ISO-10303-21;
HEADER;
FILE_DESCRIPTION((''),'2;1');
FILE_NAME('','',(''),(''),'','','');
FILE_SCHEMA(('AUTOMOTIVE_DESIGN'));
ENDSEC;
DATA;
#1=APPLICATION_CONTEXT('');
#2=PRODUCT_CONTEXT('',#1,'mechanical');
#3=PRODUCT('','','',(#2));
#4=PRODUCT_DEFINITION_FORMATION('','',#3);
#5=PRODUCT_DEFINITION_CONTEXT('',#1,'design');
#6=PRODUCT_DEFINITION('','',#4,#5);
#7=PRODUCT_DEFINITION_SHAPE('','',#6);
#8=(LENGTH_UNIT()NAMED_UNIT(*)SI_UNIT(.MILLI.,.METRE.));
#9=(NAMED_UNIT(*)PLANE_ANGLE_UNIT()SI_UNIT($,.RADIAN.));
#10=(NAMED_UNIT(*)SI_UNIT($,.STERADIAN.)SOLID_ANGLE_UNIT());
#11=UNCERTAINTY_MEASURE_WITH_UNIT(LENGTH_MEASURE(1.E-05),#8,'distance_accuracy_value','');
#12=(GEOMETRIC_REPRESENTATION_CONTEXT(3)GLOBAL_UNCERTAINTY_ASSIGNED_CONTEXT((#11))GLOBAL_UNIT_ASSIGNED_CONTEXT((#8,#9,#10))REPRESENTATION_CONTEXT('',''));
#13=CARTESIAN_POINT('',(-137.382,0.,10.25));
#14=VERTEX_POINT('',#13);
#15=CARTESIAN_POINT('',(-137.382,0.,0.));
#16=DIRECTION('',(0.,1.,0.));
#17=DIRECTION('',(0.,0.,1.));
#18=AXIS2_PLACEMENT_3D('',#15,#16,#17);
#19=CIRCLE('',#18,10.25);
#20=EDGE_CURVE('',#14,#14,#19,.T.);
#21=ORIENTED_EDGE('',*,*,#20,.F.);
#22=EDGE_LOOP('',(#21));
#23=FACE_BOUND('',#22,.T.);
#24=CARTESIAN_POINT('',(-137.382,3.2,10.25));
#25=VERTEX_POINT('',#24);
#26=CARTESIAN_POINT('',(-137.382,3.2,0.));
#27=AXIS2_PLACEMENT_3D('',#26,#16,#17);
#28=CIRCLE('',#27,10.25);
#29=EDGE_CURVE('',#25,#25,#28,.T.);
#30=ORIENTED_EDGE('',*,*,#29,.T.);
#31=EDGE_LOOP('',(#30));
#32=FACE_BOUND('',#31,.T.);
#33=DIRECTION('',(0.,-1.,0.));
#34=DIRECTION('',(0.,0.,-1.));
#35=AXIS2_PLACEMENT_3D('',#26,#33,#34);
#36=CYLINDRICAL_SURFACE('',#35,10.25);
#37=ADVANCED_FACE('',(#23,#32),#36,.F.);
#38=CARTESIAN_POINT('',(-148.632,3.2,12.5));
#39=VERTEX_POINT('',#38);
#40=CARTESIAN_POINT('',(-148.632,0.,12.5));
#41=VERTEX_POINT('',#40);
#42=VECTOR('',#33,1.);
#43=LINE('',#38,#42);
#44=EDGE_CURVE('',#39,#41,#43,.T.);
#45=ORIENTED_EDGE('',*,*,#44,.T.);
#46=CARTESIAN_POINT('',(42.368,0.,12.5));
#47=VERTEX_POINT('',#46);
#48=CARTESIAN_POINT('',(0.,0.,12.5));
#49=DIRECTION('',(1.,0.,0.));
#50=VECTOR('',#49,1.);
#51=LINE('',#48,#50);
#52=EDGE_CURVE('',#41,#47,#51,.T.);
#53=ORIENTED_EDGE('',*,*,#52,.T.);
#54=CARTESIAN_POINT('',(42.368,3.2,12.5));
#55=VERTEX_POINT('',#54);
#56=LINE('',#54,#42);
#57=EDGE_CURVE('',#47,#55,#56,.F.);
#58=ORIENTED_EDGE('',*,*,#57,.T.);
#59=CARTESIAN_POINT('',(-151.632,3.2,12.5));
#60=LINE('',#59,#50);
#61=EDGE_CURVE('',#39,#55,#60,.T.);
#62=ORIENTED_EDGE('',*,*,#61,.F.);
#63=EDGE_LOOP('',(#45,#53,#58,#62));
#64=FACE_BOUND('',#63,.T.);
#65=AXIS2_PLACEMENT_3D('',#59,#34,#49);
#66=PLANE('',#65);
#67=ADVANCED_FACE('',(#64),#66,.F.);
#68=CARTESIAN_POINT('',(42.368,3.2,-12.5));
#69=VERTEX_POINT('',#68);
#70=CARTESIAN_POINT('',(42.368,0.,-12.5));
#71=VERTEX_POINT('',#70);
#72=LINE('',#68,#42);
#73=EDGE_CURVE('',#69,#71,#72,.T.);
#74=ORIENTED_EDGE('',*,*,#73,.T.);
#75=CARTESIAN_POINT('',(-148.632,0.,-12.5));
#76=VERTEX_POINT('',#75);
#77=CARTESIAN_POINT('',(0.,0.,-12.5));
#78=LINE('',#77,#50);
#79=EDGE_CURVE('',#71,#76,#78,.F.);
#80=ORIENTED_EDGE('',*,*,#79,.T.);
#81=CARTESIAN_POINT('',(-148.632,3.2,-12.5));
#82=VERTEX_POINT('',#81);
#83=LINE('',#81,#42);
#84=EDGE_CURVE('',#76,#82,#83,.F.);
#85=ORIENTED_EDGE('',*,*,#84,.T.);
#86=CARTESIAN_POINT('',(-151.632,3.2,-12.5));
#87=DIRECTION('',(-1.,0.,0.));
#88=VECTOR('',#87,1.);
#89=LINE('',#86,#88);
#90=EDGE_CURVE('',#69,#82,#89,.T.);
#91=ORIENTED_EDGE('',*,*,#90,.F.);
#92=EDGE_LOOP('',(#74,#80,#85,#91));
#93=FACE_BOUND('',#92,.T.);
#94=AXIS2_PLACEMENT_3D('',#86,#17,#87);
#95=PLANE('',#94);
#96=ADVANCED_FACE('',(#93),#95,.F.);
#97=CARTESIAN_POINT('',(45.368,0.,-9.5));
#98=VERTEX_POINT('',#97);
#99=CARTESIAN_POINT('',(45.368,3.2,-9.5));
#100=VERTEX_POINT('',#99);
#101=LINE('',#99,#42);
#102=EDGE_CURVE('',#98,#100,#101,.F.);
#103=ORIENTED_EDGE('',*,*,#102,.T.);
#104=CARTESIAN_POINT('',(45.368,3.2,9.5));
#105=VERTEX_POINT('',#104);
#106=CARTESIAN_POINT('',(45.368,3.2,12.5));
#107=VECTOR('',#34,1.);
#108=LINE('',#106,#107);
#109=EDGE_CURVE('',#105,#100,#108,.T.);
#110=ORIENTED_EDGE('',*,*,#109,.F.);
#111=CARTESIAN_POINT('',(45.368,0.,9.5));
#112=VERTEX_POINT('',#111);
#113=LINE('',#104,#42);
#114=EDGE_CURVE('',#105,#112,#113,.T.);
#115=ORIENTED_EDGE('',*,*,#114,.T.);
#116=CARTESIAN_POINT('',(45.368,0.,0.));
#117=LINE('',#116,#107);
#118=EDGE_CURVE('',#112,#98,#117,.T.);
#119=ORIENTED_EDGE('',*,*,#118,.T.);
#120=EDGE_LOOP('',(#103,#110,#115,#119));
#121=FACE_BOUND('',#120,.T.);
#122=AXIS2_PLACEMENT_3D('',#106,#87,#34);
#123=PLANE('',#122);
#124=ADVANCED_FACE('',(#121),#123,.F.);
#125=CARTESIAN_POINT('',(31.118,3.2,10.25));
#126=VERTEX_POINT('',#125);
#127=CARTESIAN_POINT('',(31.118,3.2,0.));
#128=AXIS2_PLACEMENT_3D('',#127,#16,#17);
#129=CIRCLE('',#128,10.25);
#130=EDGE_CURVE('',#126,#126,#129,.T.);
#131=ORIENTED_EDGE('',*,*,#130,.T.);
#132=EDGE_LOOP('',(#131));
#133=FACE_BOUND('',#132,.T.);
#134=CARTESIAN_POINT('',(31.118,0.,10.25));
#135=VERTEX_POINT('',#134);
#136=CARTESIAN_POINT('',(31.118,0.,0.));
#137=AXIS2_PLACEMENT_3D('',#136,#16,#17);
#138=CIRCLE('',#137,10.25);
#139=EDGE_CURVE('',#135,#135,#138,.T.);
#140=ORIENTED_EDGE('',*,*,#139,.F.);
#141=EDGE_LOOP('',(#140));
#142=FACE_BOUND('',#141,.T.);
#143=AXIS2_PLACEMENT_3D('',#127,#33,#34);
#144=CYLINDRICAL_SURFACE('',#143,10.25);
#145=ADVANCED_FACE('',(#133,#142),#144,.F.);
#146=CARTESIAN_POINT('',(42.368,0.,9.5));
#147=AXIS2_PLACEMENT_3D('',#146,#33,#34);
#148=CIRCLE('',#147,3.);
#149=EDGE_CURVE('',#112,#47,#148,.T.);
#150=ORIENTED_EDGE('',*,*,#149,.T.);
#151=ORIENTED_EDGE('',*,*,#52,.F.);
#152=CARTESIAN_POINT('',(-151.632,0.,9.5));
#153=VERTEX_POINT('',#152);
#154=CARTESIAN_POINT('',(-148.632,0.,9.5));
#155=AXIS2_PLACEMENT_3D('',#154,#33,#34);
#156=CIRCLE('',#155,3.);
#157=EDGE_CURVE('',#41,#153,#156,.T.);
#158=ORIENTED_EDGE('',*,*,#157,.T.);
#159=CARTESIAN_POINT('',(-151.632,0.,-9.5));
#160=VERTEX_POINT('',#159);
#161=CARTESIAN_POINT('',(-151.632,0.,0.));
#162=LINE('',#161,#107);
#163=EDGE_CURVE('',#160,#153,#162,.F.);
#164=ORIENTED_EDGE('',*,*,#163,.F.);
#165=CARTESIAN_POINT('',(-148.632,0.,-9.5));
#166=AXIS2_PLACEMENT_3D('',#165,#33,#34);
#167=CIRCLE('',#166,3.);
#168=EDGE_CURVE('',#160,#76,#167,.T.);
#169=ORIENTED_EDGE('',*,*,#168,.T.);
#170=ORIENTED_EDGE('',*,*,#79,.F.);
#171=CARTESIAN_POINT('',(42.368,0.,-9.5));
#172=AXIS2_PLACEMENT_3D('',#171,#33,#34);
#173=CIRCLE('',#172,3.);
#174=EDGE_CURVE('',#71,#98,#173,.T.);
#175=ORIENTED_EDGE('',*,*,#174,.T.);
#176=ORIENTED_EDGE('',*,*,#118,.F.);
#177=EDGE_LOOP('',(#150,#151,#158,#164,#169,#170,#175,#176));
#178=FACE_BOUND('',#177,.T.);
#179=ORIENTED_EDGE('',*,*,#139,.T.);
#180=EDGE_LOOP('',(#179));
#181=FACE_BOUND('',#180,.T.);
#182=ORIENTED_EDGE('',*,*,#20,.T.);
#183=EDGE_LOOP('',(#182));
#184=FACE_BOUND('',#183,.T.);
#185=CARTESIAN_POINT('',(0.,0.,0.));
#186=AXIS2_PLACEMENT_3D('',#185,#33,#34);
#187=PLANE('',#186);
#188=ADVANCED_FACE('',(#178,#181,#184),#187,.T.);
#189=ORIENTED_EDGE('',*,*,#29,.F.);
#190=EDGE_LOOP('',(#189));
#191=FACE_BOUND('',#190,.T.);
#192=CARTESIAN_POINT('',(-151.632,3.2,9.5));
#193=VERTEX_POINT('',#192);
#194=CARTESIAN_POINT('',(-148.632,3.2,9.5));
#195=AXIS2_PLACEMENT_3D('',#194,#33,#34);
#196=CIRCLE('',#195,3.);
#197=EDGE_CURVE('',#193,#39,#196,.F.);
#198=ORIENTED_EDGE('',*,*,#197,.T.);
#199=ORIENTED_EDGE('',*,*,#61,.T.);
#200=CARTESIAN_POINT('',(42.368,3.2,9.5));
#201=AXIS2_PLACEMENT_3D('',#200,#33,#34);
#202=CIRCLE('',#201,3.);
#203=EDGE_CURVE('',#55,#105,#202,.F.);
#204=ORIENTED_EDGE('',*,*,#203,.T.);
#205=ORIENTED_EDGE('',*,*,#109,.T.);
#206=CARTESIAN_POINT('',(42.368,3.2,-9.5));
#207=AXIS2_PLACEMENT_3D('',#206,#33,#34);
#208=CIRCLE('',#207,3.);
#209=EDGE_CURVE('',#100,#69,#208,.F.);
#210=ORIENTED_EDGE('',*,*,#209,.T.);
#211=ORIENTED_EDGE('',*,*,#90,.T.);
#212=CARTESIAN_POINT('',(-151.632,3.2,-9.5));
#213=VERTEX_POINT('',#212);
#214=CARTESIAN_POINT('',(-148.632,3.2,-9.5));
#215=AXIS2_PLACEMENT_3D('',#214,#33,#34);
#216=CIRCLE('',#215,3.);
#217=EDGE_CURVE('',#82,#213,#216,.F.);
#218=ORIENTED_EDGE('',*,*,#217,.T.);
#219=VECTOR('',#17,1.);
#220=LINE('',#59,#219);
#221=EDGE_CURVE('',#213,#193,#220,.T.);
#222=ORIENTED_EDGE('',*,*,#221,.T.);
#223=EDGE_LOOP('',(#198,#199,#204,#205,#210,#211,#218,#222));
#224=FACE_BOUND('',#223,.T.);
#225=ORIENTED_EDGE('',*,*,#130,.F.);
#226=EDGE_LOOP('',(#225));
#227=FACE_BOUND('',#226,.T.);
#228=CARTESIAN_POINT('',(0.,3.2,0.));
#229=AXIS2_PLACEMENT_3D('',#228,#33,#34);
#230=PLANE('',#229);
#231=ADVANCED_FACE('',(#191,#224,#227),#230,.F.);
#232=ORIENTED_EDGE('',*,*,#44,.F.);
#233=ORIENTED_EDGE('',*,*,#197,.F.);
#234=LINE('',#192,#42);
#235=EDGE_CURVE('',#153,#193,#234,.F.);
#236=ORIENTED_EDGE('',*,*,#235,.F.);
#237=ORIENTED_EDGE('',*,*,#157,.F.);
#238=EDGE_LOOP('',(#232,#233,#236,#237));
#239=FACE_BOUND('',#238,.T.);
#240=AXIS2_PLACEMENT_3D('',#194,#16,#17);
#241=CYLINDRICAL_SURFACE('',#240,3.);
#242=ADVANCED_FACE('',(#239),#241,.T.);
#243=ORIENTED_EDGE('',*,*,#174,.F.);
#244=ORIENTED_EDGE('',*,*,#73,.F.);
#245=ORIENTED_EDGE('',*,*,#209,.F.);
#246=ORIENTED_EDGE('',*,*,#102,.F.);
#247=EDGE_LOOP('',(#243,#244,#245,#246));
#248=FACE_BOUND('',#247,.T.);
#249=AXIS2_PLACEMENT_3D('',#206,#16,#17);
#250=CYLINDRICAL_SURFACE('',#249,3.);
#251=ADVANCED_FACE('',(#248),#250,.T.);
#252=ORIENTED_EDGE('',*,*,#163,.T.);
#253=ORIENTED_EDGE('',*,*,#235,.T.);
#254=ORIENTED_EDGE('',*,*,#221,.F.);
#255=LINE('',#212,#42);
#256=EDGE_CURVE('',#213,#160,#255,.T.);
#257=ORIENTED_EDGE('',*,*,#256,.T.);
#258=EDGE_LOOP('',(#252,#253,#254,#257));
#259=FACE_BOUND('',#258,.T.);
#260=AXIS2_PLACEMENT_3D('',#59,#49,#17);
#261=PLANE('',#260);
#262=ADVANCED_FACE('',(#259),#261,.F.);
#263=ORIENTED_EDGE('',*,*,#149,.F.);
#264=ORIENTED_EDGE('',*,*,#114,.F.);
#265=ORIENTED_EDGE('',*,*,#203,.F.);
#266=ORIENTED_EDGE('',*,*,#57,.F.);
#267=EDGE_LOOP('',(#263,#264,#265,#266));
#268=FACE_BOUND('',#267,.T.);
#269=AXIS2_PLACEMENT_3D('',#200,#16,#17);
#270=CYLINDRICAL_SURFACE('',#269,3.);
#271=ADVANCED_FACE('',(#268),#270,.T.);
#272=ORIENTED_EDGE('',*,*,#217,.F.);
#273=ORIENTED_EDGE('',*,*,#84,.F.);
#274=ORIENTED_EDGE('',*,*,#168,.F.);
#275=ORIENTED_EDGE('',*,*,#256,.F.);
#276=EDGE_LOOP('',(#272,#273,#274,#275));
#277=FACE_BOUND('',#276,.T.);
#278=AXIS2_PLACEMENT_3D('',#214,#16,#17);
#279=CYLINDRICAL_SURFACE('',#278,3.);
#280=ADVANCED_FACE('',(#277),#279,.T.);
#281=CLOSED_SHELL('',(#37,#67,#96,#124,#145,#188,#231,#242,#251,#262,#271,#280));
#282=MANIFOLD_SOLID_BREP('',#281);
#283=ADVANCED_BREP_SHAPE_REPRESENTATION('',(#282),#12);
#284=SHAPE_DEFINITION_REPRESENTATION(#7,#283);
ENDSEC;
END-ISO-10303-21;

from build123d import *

# Parameters (mm, degrees)
SKETCH1_W           = 197
SKETCH1_H           = 25
SKETCH1_R           = 10.25
BOSS_EXTRUDE1_DEPTH = 3.2
FILLET1_R           = 3


with BuildPart() as part:
    # Sketch1 → Boss-Extrude1 (new body)
    with BuildSketch(Plane(origin=(0, 0, 0), x_dir=(1, 0, 0), z_dir=(0, 1, 0))):
        with Locations((-53.132, 0)):
            Rectangle(SKETCH1_W, SKETCH1_H)
        with Locations(Location((31.118, 0, 0), (0, 0, 270))):
            Circle(SKETCH1_R, mode=Mode.SUBTRACT)
        with Locations(Location((-137.382, 0, 0), (0, 0, 270))):
            Circle(SKETCH1_R, mode=Mode.SUBTRACT)
    extrude(amount=BOSS_EXTRUDE1_DEPTH)

    # Fillet1
    fillet1_edges = [part.edges().sort_by_distance(p)[0] for p in [
        (45.368, 1.6, -12.5),
        (45.368, 1.6, 12.5),
        (-151.632, 1.6, 12.5),
        (-151.632, 1.6, -12.5),
    ]]
    fillet(fillet1_edges, radius=FILLET1_R)


solid = part.part
